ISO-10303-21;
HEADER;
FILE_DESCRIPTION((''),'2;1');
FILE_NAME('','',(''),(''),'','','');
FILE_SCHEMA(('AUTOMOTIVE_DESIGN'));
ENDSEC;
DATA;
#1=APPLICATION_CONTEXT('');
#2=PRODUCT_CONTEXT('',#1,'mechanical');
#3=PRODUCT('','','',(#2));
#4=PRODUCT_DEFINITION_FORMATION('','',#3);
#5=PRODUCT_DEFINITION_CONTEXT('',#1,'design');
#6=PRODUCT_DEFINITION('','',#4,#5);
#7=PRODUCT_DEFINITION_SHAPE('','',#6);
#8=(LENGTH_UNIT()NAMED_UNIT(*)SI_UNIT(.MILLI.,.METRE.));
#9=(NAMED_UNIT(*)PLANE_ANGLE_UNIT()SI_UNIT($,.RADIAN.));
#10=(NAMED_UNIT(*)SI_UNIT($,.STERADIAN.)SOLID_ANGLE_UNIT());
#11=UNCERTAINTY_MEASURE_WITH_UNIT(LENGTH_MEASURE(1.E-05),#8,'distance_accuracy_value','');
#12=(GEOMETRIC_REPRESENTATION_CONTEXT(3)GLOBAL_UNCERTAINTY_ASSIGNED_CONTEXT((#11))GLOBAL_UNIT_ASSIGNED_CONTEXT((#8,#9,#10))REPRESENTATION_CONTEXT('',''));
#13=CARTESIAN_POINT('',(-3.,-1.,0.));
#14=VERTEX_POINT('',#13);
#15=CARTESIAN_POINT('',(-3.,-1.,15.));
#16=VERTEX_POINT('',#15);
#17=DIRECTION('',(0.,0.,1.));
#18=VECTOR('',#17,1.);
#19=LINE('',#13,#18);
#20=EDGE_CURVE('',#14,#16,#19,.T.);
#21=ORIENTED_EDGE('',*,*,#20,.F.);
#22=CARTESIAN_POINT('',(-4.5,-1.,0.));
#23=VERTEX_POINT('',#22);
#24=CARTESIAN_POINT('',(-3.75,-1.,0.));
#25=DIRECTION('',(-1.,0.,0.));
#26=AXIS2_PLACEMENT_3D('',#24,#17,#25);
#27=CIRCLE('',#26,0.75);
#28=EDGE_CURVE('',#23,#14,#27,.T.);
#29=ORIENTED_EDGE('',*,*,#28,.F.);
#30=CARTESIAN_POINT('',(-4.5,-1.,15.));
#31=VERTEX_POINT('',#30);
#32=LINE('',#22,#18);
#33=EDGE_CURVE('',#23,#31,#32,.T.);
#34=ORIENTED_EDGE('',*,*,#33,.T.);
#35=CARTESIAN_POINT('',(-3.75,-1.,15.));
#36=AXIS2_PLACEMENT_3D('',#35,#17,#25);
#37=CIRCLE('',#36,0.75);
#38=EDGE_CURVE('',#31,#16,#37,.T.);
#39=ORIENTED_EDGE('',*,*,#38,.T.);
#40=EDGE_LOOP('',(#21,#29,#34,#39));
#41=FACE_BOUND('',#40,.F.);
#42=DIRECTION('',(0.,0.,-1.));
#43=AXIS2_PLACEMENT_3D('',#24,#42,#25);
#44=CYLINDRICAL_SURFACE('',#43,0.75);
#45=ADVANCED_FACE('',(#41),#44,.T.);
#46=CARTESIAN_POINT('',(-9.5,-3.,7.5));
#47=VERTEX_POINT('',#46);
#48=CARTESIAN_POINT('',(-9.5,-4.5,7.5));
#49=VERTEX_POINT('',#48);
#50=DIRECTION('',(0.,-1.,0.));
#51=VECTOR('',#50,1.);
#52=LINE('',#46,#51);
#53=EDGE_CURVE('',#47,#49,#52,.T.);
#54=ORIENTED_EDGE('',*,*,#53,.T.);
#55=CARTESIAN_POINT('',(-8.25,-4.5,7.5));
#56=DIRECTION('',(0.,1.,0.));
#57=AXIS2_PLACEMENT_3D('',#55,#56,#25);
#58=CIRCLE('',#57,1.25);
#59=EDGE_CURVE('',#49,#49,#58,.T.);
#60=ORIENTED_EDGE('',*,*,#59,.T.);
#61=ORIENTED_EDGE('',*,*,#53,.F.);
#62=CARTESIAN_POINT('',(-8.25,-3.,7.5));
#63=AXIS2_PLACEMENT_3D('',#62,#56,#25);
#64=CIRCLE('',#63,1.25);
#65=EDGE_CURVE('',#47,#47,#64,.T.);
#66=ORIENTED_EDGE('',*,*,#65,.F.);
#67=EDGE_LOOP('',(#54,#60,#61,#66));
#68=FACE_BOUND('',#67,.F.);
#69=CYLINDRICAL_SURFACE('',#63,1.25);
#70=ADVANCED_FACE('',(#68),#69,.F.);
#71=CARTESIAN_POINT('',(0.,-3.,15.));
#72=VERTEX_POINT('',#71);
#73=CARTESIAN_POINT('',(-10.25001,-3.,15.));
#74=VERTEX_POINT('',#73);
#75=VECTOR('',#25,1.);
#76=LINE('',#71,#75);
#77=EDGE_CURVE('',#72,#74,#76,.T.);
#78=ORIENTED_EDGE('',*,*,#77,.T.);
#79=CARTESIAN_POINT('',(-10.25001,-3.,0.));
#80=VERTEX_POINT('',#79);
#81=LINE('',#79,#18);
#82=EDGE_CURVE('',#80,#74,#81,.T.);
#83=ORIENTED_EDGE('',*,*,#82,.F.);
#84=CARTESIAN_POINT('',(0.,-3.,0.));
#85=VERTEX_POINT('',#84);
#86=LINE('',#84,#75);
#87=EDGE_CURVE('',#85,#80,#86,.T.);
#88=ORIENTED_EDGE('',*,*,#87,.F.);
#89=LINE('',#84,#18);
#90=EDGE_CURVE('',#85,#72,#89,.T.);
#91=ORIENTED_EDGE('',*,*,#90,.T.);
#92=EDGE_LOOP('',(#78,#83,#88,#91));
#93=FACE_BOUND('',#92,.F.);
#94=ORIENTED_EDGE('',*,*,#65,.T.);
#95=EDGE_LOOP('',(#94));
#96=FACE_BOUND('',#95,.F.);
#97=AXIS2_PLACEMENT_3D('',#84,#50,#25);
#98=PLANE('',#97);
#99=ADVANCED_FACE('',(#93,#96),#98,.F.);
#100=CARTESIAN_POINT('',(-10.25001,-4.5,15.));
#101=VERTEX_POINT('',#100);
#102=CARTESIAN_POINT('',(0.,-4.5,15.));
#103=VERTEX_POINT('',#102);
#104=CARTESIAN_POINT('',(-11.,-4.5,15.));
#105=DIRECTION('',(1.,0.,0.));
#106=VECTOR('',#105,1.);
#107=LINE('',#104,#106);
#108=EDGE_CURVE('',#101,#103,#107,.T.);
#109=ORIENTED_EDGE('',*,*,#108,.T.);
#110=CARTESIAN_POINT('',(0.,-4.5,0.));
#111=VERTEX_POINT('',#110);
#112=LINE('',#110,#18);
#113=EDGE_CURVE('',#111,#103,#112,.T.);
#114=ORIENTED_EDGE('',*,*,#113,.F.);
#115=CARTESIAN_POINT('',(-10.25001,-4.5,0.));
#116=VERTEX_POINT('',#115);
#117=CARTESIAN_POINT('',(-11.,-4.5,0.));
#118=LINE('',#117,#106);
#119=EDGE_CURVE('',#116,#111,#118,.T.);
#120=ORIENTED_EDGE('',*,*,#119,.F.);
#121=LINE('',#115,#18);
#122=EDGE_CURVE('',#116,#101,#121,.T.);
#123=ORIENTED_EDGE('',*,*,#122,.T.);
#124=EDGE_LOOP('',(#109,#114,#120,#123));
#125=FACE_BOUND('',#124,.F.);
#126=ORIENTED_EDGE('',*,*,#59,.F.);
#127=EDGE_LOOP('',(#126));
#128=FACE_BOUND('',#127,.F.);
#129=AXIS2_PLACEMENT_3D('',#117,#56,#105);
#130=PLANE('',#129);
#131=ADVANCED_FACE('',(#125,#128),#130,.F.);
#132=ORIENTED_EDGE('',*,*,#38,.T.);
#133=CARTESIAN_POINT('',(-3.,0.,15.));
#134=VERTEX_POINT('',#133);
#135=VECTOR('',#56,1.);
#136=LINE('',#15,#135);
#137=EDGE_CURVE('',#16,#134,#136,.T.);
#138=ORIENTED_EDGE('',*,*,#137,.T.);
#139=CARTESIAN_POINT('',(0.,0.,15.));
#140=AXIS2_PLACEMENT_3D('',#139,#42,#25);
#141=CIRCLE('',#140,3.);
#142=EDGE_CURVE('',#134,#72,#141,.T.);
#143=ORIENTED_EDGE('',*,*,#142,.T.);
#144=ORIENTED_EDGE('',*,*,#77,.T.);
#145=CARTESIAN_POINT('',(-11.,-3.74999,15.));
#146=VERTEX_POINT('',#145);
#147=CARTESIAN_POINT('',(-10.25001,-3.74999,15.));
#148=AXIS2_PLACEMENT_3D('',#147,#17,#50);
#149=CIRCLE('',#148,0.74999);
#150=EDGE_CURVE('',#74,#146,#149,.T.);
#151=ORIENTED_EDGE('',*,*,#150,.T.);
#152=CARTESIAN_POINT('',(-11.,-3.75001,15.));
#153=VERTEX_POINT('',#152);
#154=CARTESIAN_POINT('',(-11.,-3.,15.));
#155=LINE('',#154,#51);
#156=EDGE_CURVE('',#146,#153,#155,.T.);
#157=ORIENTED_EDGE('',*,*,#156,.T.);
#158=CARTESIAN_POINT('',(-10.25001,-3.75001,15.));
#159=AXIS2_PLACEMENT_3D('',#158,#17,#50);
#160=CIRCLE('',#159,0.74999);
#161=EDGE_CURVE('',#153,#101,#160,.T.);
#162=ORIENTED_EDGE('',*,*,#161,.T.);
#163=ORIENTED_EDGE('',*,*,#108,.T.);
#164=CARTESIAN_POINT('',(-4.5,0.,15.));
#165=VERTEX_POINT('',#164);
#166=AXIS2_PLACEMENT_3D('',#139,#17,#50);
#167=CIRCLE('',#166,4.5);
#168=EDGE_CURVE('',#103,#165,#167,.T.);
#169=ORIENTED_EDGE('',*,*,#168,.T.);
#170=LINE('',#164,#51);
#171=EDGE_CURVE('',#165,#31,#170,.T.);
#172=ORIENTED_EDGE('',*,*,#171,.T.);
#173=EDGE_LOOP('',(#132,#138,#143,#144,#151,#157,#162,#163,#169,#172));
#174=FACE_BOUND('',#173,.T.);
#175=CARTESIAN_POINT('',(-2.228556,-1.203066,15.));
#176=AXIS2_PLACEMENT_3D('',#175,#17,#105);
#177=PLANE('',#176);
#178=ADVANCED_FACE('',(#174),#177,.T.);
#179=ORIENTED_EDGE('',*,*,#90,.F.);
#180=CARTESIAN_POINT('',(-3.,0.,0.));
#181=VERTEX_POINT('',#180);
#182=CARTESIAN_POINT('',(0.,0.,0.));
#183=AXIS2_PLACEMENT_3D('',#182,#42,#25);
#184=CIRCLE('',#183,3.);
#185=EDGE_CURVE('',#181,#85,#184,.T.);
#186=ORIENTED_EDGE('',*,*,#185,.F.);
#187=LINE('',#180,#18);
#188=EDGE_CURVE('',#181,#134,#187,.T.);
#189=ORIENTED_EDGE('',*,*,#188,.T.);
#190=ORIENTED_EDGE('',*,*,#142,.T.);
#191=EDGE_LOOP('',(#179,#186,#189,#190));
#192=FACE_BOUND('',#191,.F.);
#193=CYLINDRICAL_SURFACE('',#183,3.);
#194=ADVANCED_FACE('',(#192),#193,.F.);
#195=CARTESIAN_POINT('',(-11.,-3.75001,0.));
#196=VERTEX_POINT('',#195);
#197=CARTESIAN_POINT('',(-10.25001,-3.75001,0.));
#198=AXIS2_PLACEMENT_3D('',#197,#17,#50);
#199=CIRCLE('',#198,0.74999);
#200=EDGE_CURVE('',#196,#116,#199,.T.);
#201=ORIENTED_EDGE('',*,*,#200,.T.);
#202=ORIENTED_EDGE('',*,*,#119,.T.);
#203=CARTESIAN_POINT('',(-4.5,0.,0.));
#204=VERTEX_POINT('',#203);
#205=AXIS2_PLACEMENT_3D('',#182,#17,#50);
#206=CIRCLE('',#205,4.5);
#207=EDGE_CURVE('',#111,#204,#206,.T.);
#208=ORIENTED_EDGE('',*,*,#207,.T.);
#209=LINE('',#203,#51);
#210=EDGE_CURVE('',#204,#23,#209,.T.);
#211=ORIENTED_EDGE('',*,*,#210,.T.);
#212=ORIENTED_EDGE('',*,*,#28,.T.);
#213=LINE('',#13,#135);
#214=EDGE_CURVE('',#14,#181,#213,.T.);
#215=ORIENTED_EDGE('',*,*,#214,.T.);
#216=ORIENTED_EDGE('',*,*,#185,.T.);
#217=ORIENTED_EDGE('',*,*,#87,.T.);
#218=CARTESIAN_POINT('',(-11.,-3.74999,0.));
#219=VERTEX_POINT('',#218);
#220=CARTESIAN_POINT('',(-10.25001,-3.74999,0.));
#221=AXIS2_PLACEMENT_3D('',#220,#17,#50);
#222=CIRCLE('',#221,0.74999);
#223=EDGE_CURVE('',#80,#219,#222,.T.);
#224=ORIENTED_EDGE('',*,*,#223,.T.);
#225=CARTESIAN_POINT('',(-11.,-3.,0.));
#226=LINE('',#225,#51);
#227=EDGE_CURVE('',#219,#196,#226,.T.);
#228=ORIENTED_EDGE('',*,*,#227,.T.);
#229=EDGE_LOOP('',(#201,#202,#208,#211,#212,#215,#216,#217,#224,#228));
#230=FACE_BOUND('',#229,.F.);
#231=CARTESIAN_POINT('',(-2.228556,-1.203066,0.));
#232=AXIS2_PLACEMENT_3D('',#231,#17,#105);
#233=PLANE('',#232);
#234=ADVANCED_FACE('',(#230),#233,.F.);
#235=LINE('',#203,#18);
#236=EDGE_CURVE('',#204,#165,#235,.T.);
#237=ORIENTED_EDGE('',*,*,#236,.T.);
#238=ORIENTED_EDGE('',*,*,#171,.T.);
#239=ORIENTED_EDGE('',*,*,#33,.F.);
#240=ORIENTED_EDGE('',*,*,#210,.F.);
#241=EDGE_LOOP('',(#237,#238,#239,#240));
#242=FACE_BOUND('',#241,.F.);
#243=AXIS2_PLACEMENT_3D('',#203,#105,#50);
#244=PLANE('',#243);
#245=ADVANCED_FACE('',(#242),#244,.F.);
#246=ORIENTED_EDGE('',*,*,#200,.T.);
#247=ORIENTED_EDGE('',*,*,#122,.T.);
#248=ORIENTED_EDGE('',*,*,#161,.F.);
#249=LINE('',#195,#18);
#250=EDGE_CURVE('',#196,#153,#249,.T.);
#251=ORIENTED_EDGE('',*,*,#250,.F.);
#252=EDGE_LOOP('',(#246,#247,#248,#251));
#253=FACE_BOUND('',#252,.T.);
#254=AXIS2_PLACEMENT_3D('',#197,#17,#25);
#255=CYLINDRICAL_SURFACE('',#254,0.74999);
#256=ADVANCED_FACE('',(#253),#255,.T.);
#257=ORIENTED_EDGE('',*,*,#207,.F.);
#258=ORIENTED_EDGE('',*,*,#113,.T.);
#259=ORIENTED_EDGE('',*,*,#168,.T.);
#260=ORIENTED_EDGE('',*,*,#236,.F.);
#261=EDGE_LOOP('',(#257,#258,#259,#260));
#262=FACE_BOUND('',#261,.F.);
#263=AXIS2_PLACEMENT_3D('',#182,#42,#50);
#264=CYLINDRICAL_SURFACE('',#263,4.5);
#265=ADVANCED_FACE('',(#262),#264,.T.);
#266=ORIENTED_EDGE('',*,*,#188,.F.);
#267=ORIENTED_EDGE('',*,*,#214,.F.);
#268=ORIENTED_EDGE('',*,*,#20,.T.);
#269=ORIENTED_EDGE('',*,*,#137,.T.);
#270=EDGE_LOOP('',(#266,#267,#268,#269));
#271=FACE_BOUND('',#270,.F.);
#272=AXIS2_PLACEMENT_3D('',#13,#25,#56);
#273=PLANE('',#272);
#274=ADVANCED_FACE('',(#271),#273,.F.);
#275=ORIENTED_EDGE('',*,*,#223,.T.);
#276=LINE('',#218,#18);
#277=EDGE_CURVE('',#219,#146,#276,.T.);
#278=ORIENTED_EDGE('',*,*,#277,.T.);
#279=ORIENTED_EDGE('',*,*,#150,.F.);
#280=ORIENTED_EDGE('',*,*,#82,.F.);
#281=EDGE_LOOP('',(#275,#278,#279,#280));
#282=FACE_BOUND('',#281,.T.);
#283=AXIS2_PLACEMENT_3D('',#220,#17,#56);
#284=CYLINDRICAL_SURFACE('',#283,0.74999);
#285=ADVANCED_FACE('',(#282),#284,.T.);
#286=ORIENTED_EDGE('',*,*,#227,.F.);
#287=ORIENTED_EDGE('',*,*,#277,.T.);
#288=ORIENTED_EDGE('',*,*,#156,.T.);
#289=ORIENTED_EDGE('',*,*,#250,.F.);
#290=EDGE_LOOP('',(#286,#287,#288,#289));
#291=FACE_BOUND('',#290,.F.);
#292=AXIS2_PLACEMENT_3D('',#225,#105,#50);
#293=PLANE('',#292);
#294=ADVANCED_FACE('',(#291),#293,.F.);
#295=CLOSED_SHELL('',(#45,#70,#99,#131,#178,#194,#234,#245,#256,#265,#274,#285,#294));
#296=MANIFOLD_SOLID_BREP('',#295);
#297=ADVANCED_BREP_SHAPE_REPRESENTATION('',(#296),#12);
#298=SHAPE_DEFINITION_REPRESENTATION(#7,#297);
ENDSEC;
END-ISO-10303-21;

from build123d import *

# Parameters (mm, degrees)
F1_DEPTH = 15
F2_R     = 0.74999
F3_R     = 1.25
F4_DEPTH = 8.2


# Not quite as in the source:
# - a fillet or chamfer is up to 0.001 mm smaller than in the source, because OpenCascade refuses the exact size


with BuildPart() as f1:
    # F0 (on Top) → F1 (new body)
    with BuildSketch(Plane.XY):
        with BuildLine():
            ThreePointArc((-3, 0), (2.1213203436, 2.1213203436), (0, -3))
            Line((0, -3), (-11, -3))
            Line((-11, -3), (-11, -4.5))
            Line((-11, -4.5), (0, -4.5))
            ThreePointArc((0, -4.5), (3.1819805153, 3.1819805153), (-4.5, 0))
            Line((-4.5, 0), (-4.5, -1))
            ThreePointArc((-4.5, -1), (-3.75, -1.75), (-3, -1))
            Line((-3, -1), (-3, 0))
        make_face()
    extrude(amount=F1_DEPTH)

    # F2 (radius 0.75 in the source; OpenCascade refuses exactly that, so slightly less here)
    f2_edges = [f1.edges().sort_by_distance(p)[0] for p in [
        (-11, -3, 7.5),
        (-11, -4.5, 7.5),
    ]]
    fillet(f2_edges, radius=F2_R)

    # F3 (on face) → F4 (cut)
    with BuildSketch(Plane(origin=(0, -3, 0), x_dir=(-1, 0, 0), z_dir=(0, 1, 0))):
        with Locations((8.25, 7.5)):
            Circle(F3_R)
    extrude(amount=-F4_DEPTH, mode=Mode.SUBTRACT)


solid = f1.part
